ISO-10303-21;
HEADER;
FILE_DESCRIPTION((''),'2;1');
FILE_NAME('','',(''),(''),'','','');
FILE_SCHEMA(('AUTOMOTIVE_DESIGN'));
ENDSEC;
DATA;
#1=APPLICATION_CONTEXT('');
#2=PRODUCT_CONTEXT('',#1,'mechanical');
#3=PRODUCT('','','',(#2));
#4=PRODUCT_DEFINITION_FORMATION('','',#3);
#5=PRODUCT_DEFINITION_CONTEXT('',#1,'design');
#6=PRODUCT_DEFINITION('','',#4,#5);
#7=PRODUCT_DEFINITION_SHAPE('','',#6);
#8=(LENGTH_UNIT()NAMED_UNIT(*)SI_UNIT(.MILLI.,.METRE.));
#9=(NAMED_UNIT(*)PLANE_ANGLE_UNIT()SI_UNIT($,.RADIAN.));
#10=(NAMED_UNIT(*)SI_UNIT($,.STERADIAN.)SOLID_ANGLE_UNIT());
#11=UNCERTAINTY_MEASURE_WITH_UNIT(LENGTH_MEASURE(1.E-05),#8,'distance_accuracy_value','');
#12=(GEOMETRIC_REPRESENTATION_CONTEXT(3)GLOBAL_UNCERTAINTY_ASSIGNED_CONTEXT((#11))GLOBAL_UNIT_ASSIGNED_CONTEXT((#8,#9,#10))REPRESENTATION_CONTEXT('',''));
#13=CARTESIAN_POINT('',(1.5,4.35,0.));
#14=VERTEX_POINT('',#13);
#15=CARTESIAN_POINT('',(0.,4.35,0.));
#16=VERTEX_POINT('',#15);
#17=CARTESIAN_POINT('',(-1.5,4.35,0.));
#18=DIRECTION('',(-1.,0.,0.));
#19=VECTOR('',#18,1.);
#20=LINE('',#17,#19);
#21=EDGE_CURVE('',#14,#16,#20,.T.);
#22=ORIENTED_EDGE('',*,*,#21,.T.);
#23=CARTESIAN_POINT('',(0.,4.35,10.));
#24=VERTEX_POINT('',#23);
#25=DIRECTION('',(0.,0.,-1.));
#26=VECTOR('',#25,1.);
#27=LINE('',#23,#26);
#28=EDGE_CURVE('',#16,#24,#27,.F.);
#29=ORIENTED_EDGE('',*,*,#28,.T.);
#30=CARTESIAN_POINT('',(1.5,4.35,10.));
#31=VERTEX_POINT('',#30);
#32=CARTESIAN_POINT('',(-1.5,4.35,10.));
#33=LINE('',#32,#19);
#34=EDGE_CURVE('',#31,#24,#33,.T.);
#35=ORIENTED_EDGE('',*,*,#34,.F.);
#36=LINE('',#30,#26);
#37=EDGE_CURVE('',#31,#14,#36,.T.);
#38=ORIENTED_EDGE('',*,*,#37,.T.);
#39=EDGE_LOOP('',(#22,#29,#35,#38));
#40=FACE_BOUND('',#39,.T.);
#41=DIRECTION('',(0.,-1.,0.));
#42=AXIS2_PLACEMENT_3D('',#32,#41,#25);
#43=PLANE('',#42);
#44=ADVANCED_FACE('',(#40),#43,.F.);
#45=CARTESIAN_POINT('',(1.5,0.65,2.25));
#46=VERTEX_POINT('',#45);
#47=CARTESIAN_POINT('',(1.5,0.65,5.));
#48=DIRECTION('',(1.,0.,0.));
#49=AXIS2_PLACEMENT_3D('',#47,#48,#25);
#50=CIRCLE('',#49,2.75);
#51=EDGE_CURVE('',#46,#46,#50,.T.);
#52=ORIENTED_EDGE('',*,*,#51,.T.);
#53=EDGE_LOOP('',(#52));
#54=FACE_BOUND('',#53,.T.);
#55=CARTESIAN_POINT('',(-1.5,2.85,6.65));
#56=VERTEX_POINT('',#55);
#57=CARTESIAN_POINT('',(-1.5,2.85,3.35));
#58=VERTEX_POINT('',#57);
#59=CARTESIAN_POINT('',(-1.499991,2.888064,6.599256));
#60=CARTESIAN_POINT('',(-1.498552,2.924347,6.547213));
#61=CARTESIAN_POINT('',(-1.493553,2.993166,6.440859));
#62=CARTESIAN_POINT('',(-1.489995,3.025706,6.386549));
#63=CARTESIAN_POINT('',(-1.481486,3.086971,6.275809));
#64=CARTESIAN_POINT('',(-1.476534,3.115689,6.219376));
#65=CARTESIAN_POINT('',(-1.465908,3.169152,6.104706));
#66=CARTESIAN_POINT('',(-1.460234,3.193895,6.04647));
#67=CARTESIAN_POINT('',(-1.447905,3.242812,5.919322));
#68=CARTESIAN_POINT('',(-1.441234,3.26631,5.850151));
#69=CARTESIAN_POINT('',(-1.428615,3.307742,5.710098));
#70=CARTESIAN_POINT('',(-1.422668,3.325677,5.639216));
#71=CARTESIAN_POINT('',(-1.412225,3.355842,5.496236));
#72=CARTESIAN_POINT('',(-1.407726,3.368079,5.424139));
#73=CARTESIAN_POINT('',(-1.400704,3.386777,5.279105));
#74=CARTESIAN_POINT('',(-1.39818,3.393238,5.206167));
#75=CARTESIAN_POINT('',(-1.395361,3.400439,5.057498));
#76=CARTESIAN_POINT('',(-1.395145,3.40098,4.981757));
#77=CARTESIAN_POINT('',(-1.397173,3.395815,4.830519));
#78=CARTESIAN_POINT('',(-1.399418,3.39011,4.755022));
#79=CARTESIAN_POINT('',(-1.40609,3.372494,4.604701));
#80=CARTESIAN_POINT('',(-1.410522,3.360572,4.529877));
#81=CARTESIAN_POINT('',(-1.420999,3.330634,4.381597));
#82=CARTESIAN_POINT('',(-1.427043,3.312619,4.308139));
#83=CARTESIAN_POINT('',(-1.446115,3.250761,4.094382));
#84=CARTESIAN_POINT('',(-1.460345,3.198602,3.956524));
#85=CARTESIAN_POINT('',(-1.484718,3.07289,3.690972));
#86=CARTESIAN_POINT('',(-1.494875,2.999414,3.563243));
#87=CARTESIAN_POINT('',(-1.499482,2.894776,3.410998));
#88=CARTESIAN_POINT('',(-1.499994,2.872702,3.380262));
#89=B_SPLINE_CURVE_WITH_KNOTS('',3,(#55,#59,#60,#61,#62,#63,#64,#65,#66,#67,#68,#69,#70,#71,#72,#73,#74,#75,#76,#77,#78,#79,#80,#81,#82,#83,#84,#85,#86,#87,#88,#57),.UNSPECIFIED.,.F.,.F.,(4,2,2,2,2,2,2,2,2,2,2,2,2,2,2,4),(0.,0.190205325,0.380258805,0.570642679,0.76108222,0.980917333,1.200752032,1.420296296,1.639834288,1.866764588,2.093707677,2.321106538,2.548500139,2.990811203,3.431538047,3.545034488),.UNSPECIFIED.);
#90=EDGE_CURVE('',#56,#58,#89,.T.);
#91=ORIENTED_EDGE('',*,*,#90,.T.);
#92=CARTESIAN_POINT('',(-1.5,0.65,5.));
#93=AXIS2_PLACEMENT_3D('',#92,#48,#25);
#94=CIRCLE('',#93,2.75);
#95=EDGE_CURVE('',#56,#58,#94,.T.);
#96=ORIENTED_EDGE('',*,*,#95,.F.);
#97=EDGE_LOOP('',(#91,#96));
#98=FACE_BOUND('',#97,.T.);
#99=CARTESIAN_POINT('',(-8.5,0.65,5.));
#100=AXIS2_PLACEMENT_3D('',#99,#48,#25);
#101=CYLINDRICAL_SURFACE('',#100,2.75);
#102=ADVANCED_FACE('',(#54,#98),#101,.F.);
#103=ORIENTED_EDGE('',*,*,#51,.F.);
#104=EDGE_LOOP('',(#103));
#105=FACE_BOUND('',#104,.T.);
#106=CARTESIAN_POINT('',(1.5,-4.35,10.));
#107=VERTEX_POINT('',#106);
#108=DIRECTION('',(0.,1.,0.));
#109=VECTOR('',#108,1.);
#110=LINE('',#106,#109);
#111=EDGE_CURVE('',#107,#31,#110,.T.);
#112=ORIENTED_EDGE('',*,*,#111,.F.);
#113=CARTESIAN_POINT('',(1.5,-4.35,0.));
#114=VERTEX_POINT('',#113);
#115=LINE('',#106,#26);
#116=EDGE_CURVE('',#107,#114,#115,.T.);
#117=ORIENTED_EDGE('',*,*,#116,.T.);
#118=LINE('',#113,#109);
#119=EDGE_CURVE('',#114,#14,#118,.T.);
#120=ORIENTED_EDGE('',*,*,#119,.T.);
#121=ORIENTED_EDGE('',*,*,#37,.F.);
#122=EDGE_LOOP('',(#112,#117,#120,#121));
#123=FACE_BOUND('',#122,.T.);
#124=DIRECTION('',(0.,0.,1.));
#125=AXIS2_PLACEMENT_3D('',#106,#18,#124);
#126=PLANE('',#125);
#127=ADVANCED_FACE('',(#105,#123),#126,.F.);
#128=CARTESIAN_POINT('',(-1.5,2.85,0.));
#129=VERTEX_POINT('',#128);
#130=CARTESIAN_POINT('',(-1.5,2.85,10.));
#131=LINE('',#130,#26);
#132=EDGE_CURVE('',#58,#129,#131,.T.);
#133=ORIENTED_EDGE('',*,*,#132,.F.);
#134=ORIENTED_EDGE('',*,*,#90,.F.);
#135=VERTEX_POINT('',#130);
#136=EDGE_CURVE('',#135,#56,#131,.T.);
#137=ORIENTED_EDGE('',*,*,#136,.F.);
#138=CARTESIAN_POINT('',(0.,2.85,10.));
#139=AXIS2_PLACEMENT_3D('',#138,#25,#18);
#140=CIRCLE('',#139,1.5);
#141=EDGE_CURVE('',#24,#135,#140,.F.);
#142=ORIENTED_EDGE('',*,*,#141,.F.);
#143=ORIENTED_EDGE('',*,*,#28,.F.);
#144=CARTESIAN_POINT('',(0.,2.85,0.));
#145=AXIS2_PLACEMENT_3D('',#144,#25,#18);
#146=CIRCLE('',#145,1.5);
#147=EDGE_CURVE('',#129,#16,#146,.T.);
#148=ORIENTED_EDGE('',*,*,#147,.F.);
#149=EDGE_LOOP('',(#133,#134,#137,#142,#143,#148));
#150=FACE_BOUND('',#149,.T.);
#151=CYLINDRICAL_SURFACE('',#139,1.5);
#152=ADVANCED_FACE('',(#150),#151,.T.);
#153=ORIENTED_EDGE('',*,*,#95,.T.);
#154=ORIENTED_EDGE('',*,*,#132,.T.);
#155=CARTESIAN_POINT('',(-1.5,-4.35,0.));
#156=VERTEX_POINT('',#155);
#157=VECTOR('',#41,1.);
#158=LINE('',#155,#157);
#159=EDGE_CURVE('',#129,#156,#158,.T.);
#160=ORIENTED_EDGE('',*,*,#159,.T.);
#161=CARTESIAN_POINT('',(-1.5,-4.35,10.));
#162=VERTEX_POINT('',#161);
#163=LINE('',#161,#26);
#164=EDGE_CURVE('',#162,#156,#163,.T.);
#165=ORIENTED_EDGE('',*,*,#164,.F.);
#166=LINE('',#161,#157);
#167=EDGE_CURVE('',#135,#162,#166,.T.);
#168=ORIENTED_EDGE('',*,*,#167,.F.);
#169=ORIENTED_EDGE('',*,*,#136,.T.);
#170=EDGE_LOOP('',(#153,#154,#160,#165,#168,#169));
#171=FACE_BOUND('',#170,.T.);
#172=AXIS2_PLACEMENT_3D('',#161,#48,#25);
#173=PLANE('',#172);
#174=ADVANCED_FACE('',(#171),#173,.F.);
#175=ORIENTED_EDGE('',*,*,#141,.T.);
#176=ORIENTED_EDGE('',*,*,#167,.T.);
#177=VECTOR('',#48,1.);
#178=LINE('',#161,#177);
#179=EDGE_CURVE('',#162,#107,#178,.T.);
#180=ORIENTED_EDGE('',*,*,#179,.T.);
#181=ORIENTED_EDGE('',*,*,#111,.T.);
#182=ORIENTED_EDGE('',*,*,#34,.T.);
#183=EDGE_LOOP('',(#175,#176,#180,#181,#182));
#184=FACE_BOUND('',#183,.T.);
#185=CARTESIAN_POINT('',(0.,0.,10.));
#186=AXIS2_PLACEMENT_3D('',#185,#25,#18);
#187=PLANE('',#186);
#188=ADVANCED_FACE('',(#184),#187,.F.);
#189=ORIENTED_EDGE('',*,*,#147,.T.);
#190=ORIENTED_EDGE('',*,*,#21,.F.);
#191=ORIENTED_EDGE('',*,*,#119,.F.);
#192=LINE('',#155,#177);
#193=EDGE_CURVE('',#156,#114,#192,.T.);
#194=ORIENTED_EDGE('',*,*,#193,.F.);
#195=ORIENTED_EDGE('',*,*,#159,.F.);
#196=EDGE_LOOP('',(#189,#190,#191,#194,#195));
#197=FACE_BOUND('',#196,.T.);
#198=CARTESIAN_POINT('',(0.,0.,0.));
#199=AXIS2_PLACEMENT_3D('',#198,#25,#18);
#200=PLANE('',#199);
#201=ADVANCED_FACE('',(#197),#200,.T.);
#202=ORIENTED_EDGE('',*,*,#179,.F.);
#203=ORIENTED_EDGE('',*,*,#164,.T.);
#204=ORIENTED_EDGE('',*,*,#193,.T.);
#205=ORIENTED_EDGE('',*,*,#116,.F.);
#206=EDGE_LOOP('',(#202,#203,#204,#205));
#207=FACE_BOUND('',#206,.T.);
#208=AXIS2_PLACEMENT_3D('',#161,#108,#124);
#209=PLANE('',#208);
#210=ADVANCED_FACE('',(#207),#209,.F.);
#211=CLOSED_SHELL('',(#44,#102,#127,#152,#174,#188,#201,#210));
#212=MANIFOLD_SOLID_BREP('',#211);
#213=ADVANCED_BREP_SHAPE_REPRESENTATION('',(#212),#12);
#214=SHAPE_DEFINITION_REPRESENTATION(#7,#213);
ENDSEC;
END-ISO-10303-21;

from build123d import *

# Parameters (mm, degrees)
SKETCH_1_W          = 3
SKETCH_1_H          = 8.7
EXTRUDE_1_DEPTH     = 10
SKETCH_2_R          = 2.75
CUT_EXTRUDE_1_DEPTH = 10
FILLET_1_R          = 1.5


with BuildPart() as part:
    # 草图1 → 凸台-拉伸1 (new body)
    with BuildSketch(Plane.XY):
        Rectangle(SKETCH_1_W, SKETCH_1_H)
    extrude(amount=EXTRUDE_1_DEPTH)

    # 草图2 → 切除-拉伸1 (cut)
    with BuildSketch(Plane(origin=(1.5, 0, 0), x_dir=(0, 0, -1), z_dir=(1, 0, 0))):
        with Locations((-5, 0.65)):
            Circle(SKETCH_2_R)
    extrude(amount=-CUT_EXTRUDE_1_DEPTH, mode=Mode.SUBTRACT)

    # 圆角1
    # the kernel refuses this fillet: 1.5 mm, written as the material it takes off along each edge
    with BuildSketch(Plane(origin=(-1.5, 4.35, -3.75), x_dir=(0, -1, 0), z_dir=(0, 0, 1))) as fillet_1_piece_1:
        with BuildLine():
            CenterArc((FILLET_1_R, FILLET_1_R), FILLET_1_R, 180, 90)
            Line((0, FILLET_1_R), (0, 0))
            Line((0, 0), (FILLET_1_R, 0))
        make_face()
    extrude(amount=17.5, mode=Mode.SUBTRACT)


solid = part.part
